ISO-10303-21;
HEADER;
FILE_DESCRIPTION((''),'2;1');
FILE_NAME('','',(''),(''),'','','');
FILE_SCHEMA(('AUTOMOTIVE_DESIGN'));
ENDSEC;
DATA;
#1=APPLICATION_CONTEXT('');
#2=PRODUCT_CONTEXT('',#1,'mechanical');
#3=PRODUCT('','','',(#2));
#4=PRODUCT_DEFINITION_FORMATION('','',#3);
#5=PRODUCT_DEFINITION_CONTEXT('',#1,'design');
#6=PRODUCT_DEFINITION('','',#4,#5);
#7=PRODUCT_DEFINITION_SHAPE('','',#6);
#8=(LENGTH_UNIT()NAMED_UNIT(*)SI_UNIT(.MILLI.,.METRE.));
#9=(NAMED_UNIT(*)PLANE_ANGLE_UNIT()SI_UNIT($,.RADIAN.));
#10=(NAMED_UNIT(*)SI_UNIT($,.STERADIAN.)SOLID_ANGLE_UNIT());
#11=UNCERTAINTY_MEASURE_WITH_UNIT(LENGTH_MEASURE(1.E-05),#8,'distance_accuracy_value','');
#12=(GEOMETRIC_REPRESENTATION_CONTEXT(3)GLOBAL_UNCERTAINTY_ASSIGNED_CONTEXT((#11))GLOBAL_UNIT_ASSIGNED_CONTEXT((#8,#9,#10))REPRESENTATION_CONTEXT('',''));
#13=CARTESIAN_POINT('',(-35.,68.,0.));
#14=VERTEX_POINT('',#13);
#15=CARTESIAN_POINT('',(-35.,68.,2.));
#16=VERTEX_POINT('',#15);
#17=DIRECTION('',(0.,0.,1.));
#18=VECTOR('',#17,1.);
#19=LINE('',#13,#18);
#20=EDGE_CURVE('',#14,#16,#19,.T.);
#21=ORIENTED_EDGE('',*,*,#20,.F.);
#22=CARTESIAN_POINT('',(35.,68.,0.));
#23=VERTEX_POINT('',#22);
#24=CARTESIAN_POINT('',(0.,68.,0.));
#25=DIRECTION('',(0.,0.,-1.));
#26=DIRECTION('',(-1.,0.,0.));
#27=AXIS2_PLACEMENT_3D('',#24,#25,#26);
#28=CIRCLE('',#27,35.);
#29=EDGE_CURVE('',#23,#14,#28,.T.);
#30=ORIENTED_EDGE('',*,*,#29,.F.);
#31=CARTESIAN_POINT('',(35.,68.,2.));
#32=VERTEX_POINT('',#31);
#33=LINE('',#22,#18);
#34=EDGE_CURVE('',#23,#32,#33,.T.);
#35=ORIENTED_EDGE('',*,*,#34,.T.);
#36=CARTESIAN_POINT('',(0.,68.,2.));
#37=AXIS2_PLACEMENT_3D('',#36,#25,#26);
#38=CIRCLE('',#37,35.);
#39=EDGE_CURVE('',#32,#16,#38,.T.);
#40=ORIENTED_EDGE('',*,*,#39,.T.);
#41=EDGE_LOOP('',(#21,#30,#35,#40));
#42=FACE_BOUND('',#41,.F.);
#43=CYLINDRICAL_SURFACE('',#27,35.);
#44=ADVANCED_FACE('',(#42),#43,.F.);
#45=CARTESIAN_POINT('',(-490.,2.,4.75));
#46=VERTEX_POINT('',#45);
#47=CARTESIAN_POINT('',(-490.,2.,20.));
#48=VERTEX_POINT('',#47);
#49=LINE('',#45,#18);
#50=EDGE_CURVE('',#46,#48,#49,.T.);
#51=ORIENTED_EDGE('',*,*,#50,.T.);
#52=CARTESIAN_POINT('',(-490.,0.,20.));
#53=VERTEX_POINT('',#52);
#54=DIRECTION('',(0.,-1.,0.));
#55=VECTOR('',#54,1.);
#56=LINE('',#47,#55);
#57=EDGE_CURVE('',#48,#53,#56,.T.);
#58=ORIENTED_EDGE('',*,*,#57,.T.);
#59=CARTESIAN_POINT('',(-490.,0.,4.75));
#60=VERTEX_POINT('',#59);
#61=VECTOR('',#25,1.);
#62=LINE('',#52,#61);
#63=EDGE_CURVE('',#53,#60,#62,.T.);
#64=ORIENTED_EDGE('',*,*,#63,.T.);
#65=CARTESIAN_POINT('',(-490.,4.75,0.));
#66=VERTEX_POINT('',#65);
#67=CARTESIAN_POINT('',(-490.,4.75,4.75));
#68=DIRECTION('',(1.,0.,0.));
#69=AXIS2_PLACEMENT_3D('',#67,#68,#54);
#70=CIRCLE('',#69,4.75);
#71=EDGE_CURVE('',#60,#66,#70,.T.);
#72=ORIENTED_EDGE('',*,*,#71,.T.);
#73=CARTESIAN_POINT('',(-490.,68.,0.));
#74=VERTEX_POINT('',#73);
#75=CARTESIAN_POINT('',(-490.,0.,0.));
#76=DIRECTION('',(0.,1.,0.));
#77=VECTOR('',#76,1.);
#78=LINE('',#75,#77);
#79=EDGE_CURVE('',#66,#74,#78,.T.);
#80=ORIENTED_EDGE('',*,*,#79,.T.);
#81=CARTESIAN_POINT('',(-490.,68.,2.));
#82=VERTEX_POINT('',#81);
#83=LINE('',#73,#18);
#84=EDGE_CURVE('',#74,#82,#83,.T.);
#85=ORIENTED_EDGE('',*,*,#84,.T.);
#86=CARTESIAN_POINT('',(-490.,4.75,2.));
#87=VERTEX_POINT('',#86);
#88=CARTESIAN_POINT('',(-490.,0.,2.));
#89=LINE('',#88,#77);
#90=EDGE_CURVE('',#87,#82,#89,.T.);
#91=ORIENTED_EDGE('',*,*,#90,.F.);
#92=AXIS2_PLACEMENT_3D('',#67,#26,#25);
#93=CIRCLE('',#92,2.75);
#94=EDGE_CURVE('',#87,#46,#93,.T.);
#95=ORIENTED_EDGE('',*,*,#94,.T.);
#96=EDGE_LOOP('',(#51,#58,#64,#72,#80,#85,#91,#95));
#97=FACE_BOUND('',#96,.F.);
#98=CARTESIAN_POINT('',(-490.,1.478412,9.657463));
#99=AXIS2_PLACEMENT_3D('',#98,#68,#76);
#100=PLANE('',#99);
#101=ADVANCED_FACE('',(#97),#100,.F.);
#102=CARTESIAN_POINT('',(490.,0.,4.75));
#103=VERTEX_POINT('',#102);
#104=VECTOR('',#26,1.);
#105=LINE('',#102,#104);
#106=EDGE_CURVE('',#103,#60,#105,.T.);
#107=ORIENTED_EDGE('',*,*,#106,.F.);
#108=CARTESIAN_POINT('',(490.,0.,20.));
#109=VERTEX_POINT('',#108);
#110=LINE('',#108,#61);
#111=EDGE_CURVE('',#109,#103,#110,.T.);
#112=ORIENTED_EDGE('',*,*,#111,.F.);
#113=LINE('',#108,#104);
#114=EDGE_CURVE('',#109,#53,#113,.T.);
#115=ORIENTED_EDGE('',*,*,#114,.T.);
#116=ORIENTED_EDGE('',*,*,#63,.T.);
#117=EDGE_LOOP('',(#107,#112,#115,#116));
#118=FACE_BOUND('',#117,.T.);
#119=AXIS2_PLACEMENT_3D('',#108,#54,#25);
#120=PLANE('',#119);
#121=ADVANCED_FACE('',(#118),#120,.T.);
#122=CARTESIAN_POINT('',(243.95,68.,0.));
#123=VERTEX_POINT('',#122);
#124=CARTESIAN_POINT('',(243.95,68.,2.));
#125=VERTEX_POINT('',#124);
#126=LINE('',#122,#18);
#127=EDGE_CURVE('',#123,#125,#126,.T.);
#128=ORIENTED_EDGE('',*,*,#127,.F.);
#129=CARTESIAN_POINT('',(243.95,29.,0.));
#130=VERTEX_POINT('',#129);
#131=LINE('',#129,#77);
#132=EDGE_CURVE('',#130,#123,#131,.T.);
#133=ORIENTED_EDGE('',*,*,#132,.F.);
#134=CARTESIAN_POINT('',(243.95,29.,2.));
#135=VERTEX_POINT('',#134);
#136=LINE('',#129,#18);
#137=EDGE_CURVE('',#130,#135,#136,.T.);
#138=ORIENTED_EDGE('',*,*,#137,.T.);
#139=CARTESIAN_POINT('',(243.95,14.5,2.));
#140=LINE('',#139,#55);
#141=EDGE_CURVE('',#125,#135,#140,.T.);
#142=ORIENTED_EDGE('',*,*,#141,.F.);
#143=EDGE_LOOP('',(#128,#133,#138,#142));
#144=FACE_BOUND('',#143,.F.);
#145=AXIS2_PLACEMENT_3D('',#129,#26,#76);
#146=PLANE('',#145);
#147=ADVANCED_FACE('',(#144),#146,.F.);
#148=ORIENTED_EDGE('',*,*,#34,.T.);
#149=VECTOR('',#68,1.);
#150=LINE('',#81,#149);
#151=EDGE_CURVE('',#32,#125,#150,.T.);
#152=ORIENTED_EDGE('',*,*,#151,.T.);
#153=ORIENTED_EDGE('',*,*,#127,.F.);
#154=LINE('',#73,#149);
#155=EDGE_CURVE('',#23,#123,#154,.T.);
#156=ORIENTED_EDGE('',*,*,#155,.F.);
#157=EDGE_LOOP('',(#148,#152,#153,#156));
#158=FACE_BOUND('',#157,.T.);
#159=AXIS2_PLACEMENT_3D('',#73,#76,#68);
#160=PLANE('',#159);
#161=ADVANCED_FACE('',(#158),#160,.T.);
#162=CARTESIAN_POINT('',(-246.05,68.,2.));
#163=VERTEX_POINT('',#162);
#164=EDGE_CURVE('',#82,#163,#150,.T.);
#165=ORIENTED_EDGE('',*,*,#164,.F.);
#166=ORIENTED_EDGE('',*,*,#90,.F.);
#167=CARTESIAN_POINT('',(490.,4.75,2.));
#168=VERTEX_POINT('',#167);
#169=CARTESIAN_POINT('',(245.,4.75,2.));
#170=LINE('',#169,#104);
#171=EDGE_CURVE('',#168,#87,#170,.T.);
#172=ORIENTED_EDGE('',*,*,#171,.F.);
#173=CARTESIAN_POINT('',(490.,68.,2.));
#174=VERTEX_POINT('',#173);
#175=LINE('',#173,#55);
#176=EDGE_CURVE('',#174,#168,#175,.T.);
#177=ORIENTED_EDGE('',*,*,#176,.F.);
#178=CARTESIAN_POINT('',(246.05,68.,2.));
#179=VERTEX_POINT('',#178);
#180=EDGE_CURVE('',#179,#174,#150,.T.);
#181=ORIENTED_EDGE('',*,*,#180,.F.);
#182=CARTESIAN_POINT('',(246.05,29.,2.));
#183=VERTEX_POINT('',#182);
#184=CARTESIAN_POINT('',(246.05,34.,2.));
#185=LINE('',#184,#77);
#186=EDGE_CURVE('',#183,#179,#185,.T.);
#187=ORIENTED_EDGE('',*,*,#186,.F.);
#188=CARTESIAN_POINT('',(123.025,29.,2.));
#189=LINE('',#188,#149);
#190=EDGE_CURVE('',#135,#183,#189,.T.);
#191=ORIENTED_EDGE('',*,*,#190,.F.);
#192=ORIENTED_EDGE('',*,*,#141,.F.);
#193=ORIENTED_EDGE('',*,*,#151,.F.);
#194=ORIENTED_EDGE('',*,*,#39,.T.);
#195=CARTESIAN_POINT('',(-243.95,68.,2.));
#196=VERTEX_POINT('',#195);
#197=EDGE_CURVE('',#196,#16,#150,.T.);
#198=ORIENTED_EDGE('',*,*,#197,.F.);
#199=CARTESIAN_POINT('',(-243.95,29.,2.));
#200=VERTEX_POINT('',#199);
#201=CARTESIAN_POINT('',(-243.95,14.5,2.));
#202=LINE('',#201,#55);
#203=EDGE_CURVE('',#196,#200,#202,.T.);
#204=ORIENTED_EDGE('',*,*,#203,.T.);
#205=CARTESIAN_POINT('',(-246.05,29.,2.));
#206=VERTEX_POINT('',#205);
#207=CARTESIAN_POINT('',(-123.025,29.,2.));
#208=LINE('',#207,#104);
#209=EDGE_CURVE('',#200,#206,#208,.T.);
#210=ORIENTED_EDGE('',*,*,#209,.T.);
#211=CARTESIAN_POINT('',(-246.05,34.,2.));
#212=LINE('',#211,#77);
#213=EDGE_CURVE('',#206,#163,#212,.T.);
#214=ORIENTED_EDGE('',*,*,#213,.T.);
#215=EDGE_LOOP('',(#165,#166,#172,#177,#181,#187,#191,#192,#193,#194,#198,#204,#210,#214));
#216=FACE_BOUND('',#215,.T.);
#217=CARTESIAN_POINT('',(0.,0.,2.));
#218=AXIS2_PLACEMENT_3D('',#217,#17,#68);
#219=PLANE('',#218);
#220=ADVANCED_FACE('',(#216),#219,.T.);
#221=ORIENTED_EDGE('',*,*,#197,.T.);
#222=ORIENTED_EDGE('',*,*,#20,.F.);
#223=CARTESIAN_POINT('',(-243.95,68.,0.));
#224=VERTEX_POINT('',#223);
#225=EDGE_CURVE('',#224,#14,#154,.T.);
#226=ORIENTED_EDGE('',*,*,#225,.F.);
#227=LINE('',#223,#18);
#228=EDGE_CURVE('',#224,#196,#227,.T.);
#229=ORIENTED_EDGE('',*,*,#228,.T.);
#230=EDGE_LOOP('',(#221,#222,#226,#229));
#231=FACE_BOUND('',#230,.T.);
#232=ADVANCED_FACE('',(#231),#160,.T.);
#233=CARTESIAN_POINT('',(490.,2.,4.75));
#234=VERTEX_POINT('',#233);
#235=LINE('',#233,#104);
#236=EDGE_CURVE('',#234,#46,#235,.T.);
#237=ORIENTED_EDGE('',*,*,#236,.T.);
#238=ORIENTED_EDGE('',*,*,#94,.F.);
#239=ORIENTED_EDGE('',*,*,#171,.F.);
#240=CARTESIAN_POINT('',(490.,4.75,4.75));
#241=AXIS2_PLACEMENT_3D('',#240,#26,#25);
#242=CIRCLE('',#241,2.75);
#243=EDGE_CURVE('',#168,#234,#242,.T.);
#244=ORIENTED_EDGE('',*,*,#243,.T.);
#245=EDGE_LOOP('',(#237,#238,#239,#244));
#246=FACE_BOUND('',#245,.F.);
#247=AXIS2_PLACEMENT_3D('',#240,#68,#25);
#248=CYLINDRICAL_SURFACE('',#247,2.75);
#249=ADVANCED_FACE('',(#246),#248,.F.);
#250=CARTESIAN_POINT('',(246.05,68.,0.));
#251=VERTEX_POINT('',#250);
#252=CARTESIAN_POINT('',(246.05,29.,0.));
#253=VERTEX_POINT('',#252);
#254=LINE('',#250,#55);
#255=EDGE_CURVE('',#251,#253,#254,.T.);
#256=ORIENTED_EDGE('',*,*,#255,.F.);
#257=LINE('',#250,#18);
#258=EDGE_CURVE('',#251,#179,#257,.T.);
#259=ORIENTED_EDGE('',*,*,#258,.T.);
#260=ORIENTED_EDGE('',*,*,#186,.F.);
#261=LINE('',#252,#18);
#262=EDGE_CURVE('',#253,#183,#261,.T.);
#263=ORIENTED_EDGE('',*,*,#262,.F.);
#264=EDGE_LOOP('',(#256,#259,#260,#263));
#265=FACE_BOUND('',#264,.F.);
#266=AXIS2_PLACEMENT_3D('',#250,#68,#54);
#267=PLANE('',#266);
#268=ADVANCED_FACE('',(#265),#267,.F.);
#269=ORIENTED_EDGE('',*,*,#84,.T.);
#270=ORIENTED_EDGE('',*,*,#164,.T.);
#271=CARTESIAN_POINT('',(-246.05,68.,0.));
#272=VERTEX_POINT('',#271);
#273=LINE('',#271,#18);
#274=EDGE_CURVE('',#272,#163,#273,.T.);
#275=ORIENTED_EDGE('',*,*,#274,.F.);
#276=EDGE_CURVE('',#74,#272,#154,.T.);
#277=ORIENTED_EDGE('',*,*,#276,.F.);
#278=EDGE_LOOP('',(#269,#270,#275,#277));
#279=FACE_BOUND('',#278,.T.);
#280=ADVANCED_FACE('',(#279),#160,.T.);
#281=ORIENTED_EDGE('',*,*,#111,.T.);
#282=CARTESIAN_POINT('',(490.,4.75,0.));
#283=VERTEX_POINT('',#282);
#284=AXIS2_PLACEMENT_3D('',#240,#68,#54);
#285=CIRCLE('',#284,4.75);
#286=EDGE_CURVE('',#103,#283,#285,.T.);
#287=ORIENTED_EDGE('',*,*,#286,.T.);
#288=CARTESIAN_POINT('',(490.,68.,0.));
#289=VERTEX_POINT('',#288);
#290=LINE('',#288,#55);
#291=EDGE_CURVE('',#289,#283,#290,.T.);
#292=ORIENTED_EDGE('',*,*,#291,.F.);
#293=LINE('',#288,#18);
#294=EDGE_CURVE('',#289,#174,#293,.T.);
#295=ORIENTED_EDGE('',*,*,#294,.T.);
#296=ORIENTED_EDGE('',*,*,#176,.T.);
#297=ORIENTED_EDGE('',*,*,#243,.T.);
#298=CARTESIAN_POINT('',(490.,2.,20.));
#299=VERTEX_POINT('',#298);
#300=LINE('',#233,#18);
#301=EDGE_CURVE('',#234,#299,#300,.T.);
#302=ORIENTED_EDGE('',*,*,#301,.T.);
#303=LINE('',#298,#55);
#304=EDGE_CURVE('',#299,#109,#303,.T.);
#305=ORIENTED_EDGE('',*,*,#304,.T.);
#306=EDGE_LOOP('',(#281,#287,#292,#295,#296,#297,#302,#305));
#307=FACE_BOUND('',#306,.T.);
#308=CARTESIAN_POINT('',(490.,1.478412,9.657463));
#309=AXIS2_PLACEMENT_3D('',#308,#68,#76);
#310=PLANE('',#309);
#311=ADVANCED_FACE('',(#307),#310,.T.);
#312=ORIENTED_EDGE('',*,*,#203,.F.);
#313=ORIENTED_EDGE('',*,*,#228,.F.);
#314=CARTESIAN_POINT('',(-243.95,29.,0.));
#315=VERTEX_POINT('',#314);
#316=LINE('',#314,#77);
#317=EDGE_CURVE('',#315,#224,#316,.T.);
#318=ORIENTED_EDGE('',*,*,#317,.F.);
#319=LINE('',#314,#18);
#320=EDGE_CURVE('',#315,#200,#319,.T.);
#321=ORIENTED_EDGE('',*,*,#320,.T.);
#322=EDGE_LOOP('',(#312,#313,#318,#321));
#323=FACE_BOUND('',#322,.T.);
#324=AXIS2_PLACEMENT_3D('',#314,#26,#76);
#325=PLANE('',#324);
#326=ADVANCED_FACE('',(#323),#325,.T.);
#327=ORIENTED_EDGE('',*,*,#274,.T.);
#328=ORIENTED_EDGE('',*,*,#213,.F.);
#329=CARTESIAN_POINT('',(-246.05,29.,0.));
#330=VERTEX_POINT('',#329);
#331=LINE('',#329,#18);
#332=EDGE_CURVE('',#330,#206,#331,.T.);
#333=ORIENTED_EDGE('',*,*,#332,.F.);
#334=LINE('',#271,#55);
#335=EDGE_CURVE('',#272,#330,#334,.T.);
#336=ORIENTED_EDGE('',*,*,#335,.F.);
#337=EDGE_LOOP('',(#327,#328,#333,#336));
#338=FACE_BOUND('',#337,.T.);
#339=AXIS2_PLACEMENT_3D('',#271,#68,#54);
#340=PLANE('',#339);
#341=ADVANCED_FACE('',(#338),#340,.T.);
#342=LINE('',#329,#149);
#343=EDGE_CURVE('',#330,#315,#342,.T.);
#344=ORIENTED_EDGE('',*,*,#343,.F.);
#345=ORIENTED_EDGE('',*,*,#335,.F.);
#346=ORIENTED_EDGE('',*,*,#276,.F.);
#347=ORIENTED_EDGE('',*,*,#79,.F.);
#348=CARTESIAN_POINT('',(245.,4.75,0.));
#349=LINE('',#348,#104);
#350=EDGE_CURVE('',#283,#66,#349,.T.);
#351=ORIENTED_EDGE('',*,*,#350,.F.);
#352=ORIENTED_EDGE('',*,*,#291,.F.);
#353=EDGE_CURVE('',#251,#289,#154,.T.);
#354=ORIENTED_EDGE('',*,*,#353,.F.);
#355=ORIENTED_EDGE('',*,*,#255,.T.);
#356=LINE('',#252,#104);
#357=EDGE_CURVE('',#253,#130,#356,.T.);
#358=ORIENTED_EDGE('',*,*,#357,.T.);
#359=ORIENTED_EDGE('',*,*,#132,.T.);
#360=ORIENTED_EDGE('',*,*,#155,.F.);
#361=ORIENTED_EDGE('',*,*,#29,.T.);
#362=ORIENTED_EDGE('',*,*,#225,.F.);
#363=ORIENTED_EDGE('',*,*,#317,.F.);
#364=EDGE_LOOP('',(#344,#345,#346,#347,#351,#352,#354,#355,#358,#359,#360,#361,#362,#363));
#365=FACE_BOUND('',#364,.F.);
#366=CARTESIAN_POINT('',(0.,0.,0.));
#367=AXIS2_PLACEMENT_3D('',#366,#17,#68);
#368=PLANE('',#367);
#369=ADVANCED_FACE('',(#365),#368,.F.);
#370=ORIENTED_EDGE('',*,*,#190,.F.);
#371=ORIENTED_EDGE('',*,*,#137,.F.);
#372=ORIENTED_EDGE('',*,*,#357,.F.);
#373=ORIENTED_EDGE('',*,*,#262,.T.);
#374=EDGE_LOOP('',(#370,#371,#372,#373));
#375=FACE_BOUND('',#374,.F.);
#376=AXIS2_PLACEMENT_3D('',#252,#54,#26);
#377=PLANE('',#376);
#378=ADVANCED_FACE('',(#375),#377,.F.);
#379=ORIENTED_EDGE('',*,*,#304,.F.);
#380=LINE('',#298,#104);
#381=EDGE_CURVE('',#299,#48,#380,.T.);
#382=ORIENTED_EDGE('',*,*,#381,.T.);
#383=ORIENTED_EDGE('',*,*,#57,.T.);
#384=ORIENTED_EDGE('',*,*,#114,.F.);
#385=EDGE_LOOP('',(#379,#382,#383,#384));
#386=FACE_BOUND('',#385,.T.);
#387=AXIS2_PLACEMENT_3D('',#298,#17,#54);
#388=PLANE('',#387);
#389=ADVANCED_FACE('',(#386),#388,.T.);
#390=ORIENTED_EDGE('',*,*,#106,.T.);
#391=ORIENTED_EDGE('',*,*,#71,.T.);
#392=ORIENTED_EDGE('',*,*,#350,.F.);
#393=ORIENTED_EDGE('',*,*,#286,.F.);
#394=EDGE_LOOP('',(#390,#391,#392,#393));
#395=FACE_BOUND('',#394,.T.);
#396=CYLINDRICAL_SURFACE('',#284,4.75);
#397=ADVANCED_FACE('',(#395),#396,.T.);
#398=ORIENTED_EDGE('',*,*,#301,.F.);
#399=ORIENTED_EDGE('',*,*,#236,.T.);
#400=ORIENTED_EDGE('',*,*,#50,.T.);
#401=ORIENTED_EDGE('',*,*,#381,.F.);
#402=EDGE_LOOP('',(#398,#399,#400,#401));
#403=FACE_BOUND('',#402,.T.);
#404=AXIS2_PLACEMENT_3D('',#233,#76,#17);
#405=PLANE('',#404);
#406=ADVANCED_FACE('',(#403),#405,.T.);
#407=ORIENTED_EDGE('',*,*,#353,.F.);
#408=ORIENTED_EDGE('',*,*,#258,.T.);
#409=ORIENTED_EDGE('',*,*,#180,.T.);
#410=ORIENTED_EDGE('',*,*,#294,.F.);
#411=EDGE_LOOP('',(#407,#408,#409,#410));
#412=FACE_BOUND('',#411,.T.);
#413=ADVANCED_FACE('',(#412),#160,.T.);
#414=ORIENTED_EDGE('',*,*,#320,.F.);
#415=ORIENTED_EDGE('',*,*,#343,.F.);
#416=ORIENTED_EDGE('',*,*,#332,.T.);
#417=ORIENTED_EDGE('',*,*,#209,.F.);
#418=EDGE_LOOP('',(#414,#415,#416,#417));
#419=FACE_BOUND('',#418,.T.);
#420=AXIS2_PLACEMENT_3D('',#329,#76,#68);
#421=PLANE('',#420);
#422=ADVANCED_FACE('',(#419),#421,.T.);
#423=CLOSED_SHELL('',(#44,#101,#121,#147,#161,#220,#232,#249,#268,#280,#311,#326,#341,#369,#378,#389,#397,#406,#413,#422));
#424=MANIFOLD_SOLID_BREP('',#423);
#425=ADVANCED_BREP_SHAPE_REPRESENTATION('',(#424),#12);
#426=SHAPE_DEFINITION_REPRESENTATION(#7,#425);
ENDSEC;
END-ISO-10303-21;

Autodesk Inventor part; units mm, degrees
ref_plane "YZ Plane" through (0, 0, 0) normal (1, 0, 0) x (0, 1, 0)
ref_plane "XZ Plane" through (0, 0, 0) normal (0, 1, 0) x (-1, 0, 0)
ref_plane "XY Plane" through (0, 0, 0) normal (0, 0, 1) x (1, 0, 0)
sketch "Sketch1" plane through (0, 0, 0) normal (0, 0, 1) x (1, 0, 0)
  line L0 (-490, 68) -> (490, 68)
  line L1 (490, 68) -> (490, 0)
  line L2 (490, 0) -> (-490, 0)
  line L3 (-490, 0) -> (-490, 68)
  point P0 (0, 0)
  point P1 (0, 0)
  dimension "d0" = 980
  dimension "d1" = 68
extrude "Plate1" add sketch "Sketch1" along normal blind 2
sketch "Sketch2" plane through (490, 2, 0) normal (0, -1, 0) x (1, 0, 0)
  line L0 (-980, 0) -> (0, 0)
  line L1 (0, 0) -> (0, 20)
  line L2 (0, 20) -> (-980, 20)
  line L3 (-980, 20) -> (-980, 0)
edge flange "Flange1" height 20 angle 90 thickness 2 bend radius 2.75 thickness toward (0, -1, 0) relief round relief width 2 relief depth 1 edges at (0, 0, 2) wall of the first edge with corners at (-490, 2, 0) (490, 2, 0) (490, 2, 20) (-490, 2, 20)
bend "Bend1"
corner "Corner1"
sketch "Sketch5" plane through (0, 0, 0) normal (0, 0, -1) x (-1, 0, 0)
  line L0 (490, 68) -> (-490, 68) projected
  line L1 (490, 0) -> (-490, 0) projected
  circle A0 centre (0, 68) radius 35
  line L2 (243.95, 68) -> (246.05, 68)
  line L3 (246.05, 68) -> (246.05, 29)
  line L4 (246.05, 29) -> (243.95, 29)
  line L5 (243.95, 29) -> (243.95, 68)
  line L6 (-243.95, 68) -> (-246.05, 68)
  line L7 (-246.05, 68) -> (-246.05, 29)
  line L8 (-246.05, 29) -> (-243.95, 29)
  line L9 (-243.95, 29) -> (-243.95, 68)
  line L10 (0, 68) -> (0, 0) construction
  point P0 (0, 0)
  point P1 (245, 29)
  point P2 (-245, 29)
  point P3 (-35, 68)
  point P4 (35, 68)
  dimension "d45" = 70
  dimension "d48" = 2.1
  dimension "d49" = 490
  dimension "d51" = 29
  dimension "d52" = 39
extrude "Extrusion1" cut sketch "Sketch5" against normal through all contours L3 L4 L5 L0 | L9 L8 L7 L0 | A0 L0 picked at (-5.3545, 54.8926)
sketch "Sketch9" plane through (0, 0, 2) normal (0, 0, 1) x (1, 0, 0)
  line L0 (485.6141, 29.596) -> (485.6141, 17.596) construction
  line L1 (485.6141, 17.596) -> (285.6141, 17.596) construction
  line L2 (285.6141, 17.596) -> (285.6141, 29.596) construction
  line L3 (285.6141, 29.596) -> (485.6141, 29.596) construction
  line L4 (-490, 68) -> (490, 68) projected
  point P0 (0, 0)
  point P1 (1.05, 68)
  dimension "d40" = 200
  dimension "d41" = 12
mark "Mark2"
equation "\"d1\" = СПИНА_Стрингер_2_высота"
equation "\"d2\" = Thickness"
equation "\"d3\" = BendReliefWidth"
equation "\"d4\" = BendReliefDepth"
equation "\"d5\" = MinimumRemnant"
equation "\"d6\" = TransitionRadius"
equation "\"d9\" = BendRadius"
equation "\"d10\" = CornerReliefSize"
equation "\"d11\" = GapSize"
equation "\"d12\" = JacobiRadiusSize"
equation "\"BendReliefWidth\" = Thickness"
equation "\"BendReliefDepth\" = 0.5 * Thickness"
equation "\"CornerReliefSize\" = 4 * Thickness"
equation "\"MinimumRemnant\" = 2 * Thickness"
equation "\"TransitionRadius\" = BendRadius"
equation "\"JacobiRadiusSize\" = BendRadius"
equation "\"GapSize\" = Thickness"
equation "\"СПИНА_Стрингер_2_высота\" = 68"
equation "\"Thickness\" = 2"
equation "\"BendRadius\" = 2.75"
properties part number "MSC 062 stringer back ^^" material "Stainless Steel"
